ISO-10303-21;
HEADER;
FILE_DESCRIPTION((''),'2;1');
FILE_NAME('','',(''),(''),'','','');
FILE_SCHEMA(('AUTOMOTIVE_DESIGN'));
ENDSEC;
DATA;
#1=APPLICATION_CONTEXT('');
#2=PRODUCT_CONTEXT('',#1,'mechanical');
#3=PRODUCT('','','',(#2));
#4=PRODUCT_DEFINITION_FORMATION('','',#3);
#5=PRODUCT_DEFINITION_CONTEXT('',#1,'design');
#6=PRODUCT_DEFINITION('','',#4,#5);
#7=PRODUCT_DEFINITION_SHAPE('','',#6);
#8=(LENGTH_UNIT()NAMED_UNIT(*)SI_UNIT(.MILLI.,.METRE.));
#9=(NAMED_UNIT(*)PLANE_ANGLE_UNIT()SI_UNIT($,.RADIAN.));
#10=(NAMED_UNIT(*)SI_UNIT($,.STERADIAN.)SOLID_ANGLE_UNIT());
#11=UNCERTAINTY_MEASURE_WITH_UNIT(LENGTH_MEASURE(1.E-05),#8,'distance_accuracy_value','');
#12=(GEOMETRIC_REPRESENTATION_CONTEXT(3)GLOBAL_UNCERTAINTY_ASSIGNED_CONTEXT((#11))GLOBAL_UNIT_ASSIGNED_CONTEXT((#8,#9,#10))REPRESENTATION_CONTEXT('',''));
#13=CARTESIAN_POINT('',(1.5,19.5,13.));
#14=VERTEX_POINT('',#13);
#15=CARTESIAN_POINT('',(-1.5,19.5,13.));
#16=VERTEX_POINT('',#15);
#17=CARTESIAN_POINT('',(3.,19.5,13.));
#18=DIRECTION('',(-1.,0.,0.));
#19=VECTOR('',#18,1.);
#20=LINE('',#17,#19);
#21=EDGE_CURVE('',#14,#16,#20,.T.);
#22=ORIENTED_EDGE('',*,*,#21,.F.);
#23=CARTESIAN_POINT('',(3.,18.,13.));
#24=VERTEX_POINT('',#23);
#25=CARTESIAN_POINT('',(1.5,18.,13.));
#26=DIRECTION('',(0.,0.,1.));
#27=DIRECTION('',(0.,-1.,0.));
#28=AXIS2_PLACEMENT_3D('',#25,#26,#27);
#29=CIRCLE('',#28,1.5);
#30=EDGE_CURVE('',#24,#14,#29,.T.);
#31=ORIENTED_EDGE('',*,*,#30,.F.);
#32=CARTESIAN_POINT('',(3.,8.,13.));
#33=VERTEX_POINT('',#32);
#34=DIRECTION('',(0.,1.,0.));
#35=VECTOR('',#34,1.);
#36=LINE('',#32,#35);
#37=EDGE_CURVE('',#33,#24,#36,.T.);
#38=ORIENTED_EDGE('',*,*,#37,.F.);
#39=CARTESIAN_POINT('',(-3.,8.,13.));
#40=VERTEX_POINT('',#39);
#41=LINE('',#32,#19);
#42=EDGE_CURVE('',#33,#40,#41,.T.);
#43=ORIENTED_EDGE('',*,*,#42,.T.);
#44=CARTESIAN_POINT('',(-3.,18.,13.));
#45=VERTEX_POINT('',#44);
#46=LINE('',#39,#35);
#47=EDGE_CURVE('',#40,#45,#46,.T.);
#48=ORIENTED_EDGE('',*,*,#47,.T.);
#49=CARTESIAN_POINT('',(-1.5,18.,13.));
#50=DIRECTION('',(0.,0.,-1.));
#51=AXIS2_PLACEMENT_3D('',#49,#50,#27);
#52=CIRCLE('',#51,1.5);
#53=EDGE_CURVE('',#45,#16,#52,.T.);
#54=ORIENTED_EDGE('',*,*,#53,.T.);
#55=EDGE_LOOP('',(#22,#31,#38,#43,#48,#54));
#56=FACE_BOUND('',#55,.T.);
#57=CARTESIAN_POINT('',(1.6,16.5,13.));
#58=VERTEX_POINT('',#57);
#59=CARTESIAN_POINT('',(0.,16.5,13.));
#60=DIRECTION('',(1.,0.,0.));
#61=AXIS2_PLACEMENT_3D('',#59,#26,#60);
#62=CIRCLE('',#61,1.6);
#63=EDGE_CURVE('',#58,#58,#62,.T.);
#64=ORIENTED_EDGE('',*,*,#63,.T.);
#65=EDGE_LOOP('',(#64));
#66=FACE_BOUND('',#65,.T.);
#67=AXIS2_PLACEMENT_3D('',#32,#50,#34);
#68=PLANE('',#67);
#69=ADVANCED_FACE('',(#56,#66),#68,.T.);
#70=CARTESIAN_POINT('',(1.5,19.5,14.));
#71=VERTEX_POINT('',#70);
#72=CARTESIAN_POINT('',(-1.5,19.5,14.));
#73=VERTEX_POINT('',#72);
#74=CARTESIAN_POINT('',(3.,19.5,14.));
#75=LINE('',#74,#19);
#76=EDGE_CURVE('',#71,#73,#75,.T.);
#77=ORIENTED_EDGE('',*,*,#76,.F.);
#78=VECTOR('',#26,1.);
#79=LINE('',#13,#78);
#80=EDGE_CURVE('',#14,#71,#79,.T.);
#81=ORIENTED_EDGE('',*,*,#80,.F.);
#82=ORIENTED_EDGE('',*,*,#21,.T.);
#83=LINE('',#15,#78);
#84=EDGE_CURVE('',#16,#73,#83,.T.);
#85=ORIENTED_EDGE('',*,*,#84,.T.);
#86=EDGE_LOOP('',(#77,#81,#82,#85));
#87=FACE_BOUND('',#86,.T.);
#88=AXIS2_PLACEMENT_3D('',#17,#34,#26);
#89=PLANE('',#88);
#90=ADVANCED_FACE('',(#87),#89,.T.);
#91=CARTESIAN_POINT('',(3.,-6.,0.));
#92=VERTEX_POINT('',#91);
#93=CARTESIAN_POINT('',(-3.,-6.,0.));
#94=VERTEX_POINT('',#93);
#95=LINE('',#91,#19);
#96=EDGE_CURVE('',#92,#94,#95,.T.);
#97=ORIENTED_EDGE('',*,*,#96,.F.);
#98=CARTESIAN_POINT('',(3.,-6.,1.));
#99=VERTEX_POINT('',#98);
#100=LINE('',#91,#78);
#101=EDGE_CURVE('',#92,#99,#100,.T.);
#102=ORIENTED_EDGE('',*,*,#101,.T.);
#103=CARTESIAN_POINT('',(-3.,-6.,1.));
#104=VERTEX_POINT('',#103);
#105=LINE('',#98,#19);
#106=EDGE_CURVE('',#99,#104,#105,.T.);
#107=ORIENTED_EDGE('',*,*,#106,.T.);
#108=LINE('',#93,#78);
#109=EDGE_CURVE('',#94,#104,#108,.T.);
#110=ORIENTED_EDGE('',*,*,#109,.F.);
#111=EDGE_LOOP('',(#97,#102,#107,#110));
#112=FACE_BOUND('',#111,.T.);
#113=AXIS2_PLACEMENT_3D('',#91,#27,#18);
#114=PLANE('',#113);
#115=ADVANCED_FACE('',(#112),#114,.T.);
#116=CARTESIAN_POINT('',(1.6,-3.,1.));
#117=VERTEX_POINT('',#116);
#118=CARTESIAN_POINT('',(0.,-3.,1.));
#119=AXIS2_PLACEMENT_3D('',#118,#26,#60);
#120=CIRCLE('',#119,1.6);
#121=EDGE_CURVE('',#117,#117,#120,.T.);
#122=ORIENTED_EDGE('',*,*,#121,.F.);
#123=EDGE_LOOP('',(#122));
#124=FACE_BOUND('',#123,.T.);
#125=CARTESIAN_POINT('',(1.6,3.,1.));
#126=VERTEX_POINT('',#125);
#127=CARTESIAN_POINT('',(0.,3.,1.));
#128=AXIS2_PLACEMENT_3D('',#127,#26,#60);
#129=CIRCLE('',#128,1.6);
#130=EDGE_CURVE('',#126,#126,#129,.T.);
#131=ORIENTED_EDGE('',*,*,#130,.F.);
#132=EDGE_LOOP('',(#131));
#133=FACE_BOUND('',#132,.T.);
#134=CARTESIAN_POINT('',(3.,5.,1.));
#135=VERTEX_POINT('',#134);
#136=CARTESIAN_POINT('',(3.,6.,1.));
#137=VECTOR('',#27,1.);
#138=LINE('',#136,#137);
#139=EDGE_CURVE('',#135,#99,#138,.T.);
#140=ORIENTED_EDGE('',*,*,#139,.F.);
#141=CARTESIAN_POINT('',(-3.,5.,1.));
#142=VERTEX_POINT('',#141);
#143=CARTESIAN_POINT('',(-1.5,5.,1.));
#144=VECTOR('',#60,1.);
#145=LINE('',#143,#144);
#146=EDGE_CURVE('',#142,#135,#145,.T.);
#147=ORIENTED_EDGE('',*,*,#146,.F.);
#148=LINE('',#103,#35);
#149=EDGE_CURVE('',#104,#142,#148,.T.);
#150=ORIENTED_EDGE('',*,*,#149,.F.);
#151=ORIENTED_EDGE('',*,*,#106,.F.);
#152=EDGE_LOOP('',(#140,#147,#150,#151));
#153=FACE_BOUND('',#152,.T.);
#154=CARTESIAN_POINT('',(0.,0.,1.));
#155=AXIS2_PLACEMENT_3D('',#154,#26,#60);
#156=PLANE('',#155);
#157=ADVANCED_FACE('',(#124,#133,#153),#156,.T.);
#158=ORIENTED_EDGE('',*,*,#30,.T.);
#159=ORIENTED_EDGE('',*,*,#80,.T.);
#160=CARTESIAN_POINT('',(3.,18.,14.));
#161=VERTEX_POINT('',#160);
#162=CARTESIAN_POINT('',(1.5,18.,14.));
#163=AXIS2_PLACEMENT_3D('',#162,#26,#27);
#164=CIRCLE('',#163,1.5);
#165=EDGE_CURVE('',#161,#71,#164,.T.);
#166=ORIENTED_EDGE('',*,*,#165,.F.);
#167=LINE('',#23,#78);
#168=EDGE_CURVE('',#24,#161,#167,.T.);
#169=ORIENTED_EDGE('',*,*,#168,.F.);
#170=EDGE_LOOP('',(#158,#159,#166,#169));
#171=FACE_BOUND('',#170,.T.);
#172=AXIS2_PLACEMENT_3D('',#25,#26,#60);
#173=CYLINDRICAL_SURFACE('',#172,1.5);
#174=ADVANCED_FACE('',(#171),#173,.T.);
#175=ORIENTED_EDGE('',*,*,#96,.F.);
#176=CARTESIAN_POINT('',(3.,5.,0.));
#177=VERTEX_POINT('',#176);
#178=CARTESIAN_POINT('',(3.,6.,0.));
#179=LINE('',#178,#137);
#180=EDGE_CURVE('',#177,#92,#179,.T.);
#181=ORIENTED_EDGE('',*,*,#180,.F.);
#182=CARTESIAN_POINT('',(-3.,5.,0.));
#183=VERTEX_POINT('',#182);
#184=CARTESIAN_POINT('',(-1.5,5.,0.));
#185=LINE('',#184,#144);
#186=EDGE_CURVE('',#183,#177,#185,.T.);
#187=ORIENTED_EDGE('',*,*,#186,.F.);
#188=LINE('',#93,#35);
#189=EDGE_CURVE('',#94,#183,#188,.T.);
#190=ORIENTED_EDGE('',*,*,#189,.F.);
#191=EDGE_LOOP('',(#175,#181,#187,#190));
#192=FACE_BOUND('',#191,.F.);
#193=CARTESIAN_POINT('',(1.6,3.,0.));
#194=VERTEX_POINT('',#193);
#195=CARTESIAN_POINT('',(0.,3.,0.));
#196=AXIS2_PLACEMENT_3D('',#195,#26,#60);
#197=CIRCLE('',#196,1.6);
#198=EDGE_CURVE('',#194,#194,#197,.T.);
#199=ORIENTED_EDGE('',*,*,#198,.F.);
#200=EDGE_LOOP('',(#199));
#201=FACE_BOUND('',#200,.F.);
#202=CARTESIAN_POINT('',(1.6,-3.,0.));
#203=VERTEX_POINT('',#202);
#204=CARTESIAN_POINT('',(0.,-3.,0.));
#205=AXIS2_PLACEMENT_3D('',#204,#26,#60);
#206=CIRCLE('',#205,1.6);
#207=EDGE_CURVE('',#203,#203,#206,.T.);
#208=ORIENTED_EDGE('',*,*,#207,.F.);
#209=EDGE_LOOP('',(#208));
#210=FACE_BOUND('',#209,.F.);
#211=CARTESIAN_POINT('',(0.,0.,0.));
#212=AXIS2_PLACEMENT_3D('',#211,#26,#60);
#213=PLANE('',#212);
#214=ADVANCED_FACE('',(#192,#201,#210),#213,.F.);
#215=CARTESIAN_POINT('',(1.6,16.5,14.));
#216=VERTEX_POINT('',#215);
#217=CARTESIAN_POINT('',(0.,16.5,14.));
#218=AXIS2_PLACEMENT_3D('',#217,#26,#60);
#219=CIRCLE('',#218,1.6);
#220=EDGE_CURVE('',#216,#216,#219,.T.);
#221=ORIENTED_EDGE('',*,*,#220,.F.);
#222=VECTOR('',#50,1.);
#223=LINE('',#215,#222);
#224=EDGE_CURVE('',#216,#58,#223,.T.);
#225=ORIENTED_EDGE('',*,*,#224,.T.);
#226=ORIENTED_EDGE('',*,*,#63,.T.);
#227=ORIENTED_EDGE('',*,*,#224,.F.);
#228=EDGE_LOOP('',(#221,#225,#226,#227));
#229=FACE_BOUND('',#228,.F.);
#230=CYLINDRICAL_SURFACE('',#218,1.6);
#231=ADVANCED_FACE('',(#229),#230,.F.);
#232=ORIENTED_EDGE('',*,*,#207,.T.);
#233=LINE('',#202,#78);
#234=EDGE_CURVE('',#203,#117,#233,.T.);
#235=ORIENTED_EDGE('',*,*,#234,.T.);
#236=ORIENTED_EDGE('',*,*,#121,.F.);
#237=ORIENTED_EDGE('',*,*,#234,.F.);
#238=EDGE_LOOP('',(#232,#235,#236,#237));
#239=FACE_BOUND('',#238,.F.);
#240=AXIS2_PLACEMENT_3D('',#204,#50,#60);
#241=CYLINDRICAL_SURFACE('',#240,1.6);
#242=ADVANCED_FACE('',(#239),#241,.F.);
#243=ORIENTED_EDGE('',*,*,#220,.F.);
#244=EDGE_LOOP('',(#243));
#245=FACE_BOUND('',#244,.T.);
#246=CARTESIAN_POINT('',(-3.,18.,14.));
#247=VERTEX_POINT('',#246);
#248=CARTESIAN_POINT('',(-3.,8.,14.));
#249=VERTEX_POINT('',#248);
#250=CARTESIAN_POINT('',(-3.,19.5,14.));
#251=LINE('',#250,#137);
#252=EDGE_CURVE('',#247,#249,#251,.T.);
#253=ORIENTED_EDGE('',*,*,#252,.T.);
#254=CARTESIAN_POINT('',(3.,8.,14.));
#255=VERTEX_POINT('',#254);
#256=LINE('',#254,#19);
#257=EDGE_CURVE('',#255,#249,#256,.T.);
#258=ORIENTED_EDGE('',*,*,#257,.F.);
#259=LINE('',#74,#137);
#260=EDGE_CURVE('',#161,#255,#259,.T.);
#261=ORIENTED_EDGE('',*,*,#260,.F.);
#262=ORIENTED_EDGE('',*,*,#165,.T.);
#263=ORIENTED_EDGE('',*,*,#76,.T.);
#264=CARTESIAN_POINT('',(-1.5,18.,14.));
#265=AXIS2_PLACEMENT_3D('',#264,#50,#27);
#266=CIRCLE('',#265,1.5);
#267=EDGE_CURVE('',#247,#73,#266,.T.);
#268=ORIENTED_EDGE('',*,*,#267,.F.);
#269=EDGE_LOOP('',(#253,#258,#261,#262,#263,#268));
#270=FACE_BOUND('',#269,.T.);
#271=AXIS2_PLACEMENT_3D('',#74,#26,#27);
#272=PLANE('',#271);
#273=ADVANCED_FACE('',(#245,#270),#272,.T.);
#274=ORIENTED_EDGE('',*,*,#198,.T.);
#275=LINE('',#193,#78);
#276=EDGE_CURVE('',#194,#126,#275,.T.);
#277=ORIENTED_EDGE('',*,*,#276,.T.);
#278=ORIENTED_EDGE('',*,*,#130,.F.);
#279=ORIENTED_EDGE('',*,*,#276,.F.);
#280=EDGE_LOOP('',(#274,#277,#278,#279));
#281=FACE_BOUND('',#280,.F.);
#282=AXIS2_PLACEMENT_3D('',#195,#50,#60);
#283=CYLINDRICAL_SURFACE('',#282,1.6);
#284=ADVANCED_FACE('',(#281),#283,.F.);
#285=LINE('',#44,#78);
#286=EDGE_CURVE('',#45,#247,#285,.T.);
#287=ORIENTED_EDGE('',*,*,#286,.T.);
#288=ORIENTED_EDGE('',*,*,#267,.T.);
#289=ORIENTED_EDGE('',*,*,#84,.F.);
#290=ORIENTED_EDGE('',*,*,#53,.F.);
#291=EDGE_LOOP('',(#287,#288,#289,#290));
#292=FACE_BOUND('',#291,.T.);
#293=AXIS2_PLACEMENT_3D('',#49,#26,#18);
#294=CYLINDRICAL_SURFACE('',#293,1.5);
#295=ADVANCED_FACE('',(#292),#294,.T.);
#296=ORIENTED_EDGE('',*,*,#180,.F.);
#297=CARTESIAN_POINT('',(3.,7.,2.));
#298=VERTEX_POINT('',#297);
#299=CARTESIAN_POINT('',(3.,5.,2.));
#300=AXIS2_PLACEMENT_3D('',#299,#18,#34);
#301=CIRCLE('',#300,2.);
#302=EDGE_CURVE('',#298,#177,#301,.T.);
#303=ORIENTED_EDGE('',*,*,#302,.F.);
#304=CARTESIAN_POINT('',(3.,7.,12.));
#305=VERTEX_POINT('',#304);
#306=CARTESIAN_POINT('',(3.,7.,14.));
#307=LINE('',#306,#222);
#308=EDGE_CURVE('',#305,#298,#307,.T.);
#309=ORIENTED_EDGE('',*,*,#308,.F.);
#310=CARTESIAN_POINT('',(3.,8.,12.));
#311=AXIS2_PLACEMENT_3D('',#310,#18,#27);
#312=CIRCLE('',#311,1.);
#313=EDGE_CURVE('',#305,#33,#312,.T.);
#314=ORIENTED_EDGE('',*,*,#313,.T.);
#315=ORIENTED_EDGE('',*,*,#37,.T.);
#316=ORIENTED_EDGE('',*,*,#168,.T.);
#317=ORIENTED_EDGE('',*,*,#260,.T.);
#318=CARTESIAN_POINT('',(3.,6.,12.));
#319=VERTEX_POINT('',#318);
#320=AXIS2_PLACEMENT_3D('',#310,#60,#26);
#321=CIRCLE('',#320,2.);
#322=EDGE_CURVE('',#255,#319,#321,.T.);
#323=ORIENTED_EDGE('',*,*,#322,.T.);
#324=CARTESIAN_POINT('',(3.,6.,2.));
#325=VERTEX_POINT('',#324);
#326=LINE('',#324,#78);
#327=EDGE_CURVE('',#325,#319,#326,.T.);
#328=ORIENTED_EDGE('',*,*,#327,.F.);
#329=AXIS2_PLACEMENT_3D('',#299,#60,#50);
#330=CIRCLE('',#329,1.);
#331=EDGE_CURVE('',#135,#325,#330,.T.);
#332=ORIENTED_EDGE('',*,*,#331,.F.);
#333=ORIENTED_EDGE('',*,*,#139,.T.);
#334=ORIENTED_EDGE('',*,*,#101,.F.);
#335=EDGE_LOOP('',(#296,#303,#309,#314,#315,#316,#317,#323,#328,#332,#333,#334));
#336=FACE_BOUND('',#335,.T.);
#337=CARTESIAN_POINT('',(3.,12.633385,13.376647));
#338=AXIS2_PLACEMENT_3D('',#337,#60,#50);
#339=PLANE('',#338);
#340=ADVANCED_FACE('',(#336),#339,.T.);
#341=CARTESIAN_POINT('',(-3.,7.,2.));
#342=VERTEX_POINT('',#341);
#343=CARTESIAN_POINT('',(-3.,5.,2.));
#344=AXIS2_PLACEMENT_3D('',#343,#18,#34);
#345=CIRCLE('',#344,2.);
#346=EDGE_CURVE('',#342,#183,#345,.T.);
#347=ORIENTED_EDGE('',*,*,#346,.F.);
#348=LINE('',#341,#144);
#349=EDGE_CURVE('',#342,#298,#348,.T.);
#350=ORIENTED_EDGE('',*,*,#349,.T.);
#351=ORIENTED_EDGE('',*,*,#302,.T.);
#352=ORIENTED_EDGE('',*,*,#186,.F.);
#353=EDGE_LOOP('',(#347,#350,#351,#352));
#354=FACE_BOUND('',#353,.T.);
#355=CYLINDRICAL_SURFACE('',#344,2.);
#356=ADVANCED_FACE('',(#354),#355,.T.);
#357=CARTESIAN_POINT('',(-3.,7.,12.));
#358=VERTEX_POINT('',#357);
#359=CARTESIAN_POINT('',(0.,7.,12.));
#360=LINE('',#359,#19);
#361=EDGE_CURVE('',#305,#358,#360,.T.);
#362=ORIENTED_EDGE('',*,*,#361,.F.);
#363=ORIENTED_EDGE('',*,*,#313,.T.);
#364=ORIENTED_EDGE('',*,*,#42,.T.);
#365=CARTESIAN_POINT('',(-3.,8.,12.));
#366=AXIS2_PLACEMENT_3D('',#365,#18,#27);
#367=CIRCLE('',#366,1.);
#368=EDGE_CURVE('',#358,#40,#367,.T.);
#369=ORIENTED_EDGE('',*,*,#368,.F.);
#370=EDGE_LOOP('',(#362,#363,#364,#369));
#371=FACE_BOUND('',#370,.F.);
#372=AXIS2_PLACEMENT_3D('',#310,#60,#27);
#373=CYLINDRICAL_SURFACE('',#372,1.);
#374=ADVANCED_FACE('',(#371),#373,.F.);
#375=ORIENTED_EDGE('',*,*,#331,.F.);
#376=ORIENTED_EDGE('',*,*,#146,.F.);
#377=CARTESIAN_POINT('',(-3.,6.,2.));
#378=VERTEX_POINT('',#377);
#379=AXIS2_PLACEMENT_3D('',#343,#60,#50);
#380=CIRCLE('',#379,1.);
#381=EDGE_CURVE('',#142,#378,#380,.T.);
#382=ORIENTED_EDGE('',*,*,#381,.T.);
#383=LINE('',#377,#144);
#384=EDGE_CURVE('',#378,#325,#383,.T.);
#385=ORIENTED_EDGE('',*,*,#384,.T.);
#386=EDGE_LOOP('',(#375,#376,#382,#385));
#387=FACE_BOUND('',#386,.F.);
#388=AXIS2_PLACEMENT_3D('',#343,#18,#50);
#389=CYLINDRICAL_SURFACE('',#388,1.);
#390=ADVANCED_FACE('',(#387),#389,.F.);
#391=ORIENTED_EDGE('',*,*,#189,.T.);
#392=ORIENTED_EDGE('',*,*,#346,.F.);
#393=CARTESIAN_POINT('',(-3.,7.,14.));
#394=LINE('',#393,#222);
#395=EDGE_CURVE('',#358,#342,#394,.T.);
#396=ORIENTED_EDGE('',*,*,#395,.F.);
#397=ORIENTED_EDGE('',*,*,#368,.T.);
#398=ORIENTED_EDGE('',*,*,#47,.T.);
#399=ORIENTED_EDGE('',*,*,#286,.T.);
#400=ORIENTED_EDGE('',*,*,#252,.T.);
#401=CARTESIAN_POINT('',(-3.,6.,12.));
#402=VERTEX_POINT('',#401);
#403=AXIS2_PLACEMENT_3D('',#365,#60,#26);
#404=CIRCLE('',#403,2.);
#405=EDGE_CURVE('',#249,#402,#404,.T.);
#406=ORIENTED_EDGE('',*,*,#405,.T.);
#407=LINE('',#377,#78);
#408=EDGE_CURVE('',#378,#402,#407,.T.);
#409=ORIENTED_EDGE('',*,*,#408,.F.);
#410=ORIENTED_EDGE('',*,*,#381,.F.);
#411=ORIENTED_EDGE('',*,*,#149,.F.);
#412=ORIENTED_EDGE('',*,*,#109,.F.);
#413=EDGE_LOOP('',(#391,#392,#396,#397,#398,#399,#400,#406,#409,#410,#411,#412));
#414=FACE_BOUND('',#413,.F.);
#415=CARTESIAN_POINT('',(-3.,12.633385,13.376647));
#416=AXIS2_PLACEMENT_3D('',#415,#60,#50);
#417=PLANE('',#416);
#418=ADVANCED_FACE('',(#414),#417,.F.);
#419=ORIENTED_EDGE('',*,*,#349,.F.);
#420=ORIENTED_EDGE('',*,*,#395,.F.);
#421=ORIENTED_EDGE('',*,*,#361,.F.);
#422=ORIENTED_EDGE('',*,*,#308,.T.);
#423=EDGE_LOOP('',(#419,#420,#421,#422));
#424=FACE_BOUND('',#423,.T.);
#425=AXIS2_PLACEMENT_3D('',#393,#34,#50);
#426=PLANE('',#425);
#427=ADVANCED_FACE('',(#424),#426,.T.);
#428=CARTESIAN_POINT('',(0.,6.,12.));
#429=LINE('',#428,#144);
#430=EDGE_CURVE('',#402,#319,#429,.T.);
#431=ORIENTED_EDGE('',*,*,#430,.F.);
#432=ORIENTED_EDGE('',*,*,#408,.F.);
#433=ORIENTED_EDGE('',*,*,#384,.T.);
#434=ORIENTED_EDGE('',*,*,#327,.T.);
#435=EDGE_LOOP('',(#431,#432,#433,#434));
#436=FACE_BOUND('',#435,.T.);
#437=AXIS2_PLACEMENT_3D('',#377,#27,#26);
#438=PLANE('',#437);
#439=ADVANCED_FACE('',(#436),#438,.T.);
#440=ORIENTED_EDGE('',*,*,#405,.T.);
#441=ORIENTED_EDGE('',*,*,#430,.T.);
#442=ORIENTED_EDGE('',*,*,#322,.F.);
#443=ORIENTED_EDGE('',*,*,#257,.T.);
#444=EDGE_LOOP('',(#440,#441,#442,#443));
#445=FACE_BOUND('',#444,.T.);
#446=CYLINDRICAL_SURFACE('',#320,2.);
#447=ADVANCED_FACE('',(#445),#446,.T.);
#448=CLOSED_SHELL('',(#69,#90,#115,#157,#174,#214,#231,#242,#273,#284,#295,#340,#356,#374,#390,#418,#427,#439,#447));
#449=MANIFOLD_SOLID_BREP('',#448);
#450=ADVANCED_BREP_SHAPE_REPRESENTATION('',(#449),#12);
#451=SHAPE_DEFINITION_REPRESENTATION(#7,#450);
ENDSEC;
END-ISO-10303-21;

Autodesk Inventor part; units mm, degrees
ref_plane "YZ Plane" through (0, 0, 0) normal (1, 0, 0) x (0, 1, 0)
ref_plane "XZ Plane" through (0, 0, 0) normal (0, 1, 0) x (-1, 0, 0)
ref_plane "XY Plane" through (0, 0, 0) normal (0, 0, 1) x (1, 0, 0)
sketch "Sketch5" plane through (-3, 6, 14) normal (0, -1, 0) x (1, 0, 0)
  circle A0 centre (3, -8) radius 1.6
  circle A1 centre (3, -3) radius 1.6
  line L0 (6, 0) -> (0, 0) projected
  point P0 (3, -14)
  point P1 (3, 0)
  dimension "d33" = 3.2
  dimension "d34" = 3.2
  dimension "d35" = 5
  dimension "d36" = 3
sketch "Sketch1" plane through (0, 0, 0) normal (0, 0, 1) x (1, 0, 0)
  line L0 (-3, 6) -> (3, 6)
  line L1 (3, 6) -> (3, -6)
  line L2 (3, -6) -> (-3, -6)
  line L3 (-3, -6) -> (-3, 6)
  line L4 (-3, 6) -> (3, -6) construction
  line L5 (3, 6) -> (-3, -6) construction
  circle A0 centre (0, 3) radius 1.6
  circle A1 centre (0, -3) radius 1.6
  point P0 (0, 0)
  dimension "d0" = 12
  dimension "d1" = 6
  dimension "d2" = 3.2
  dimension "d3" = 3.2
  dimension "d4" = 6
  dimension "d5" = 3
extrude "Plate1" add sketch "Sketch1" along normal blind 1
sketch "Sketch2" plane through (-3, 6, 1) normal (0, 1, 0) x (-1, 0, 0)
  line L0 (-6, 0) -> (0, 0)
  line L1 (0, 0) -> (0, 13)
  line L2 (0, 13) -> (-6, 13)
  line L3 (-6, 13) -> (-6, 0)
edge flange "Flange1" height 14 angle 90 thickness 1 bend radius 1 thickness toward (0, 1, 0) relief tear relief width 1 relief depth 0.5 edges at (0, 6, 1) wall of the first edge with corners at (3, 6, 1) (-3, 6, 1) (-3, 6, 14) (3, 6, 14)
bend "Bend1"
corner "Corner1"
sketch "Sketch6" plane through (3, 6, 13) normal (0, 0, 1) x (1, 0, 0)
  line L0 (-6, 0) -> (0, 0)
  line L1 (0, 0) -> (0, 13.5)
  line L2 (0, 13.5) -> (-6, 13.5)
  line L3 (-6, 13.5) -> (-6, 0)
edge flange "Flange3" height 13.5 angle 90 thickness 1 bend radius 1 thickness toward (0, 0, 1) relief tear relief width 1 relief depth 0.5 edges at (0, 7, 14) wall of the first edge with corners at (-3, 6, 13) (3, 6, 13) (3, 19.5, 13) (-3, 19.5, 13)
bend "Bend3"
corner "Corner3"
fillet "Corner Round1" radius 1.5 2 edges at (3, 19.5, 13.5) (-3, 19.5, 13.5)
sketch "Sketch7" plane through (-3, 8, 14) normal (0, 0, 1) x (1, 0, 0)
  circle A0 centre (3, 8.5) radius 1.6
  line L0 (0, 0) -> (6, 0) projected
  line L1 (1.5, 11.5) -> (4.5, 11.5) projected
  point P0 (3, -8)
  point P1 (3, 0)
  dimension "d50" = 3.2
  dimension "d51" = 3
extrude "Cut3" cut sketch "Sketch7" against normal blind 1
equation "\"d52\" = 厚度"
equation "\"d6\" = 厚度"
equation "\"d7\" = 折彎離隙寬度"
equation "\"d8\" = 折彎離隙深度"
equation "\"d9\" = 最小剩餘"
equation "\"d10\" = 轉移半徑"
equation "\"d13\" = 折彎半徑"
equation "\"d14\" = 轉角離隙大小"
equation "\"d15\" = 間隙大小"
equation "\"d16\" = Jacobi半徑大小"
equation "\"d39\" = 折彎離隙寬度"
equation "\"d40\" = 折彎離隙深度"
equation "\"d41\" = 最小剩餘"
equation "\"d42\" = 轉移半徑"
equation "\"d45\" = 折彎半徑"
equation "\"d46\" = 轉角離隙大小"
equation "\"d47\" = 間隙大小"
equation "\"d48\" = Jacobi半徑大小"
equation "\"折彎半徑\" = 厚度"
equation "\"折彎離隙寬度\" = 厚度"
equation "\"折彎離隙深度\" = 0.5 * 厚度"
equation "\"轉角離隙大小\" = 4 * 厚度"
equation "\"最小剩餘\" = 2 * 厚度"
equation "\"轉移半徑\" = 折彎半徑"
equation "\"Jacobi半徑大小\" = 折彎半徑"
equation "\"間隙大小\" = 厚度"
equation "\"厚度\" = 1"
properties part number "connector_Zshape"
